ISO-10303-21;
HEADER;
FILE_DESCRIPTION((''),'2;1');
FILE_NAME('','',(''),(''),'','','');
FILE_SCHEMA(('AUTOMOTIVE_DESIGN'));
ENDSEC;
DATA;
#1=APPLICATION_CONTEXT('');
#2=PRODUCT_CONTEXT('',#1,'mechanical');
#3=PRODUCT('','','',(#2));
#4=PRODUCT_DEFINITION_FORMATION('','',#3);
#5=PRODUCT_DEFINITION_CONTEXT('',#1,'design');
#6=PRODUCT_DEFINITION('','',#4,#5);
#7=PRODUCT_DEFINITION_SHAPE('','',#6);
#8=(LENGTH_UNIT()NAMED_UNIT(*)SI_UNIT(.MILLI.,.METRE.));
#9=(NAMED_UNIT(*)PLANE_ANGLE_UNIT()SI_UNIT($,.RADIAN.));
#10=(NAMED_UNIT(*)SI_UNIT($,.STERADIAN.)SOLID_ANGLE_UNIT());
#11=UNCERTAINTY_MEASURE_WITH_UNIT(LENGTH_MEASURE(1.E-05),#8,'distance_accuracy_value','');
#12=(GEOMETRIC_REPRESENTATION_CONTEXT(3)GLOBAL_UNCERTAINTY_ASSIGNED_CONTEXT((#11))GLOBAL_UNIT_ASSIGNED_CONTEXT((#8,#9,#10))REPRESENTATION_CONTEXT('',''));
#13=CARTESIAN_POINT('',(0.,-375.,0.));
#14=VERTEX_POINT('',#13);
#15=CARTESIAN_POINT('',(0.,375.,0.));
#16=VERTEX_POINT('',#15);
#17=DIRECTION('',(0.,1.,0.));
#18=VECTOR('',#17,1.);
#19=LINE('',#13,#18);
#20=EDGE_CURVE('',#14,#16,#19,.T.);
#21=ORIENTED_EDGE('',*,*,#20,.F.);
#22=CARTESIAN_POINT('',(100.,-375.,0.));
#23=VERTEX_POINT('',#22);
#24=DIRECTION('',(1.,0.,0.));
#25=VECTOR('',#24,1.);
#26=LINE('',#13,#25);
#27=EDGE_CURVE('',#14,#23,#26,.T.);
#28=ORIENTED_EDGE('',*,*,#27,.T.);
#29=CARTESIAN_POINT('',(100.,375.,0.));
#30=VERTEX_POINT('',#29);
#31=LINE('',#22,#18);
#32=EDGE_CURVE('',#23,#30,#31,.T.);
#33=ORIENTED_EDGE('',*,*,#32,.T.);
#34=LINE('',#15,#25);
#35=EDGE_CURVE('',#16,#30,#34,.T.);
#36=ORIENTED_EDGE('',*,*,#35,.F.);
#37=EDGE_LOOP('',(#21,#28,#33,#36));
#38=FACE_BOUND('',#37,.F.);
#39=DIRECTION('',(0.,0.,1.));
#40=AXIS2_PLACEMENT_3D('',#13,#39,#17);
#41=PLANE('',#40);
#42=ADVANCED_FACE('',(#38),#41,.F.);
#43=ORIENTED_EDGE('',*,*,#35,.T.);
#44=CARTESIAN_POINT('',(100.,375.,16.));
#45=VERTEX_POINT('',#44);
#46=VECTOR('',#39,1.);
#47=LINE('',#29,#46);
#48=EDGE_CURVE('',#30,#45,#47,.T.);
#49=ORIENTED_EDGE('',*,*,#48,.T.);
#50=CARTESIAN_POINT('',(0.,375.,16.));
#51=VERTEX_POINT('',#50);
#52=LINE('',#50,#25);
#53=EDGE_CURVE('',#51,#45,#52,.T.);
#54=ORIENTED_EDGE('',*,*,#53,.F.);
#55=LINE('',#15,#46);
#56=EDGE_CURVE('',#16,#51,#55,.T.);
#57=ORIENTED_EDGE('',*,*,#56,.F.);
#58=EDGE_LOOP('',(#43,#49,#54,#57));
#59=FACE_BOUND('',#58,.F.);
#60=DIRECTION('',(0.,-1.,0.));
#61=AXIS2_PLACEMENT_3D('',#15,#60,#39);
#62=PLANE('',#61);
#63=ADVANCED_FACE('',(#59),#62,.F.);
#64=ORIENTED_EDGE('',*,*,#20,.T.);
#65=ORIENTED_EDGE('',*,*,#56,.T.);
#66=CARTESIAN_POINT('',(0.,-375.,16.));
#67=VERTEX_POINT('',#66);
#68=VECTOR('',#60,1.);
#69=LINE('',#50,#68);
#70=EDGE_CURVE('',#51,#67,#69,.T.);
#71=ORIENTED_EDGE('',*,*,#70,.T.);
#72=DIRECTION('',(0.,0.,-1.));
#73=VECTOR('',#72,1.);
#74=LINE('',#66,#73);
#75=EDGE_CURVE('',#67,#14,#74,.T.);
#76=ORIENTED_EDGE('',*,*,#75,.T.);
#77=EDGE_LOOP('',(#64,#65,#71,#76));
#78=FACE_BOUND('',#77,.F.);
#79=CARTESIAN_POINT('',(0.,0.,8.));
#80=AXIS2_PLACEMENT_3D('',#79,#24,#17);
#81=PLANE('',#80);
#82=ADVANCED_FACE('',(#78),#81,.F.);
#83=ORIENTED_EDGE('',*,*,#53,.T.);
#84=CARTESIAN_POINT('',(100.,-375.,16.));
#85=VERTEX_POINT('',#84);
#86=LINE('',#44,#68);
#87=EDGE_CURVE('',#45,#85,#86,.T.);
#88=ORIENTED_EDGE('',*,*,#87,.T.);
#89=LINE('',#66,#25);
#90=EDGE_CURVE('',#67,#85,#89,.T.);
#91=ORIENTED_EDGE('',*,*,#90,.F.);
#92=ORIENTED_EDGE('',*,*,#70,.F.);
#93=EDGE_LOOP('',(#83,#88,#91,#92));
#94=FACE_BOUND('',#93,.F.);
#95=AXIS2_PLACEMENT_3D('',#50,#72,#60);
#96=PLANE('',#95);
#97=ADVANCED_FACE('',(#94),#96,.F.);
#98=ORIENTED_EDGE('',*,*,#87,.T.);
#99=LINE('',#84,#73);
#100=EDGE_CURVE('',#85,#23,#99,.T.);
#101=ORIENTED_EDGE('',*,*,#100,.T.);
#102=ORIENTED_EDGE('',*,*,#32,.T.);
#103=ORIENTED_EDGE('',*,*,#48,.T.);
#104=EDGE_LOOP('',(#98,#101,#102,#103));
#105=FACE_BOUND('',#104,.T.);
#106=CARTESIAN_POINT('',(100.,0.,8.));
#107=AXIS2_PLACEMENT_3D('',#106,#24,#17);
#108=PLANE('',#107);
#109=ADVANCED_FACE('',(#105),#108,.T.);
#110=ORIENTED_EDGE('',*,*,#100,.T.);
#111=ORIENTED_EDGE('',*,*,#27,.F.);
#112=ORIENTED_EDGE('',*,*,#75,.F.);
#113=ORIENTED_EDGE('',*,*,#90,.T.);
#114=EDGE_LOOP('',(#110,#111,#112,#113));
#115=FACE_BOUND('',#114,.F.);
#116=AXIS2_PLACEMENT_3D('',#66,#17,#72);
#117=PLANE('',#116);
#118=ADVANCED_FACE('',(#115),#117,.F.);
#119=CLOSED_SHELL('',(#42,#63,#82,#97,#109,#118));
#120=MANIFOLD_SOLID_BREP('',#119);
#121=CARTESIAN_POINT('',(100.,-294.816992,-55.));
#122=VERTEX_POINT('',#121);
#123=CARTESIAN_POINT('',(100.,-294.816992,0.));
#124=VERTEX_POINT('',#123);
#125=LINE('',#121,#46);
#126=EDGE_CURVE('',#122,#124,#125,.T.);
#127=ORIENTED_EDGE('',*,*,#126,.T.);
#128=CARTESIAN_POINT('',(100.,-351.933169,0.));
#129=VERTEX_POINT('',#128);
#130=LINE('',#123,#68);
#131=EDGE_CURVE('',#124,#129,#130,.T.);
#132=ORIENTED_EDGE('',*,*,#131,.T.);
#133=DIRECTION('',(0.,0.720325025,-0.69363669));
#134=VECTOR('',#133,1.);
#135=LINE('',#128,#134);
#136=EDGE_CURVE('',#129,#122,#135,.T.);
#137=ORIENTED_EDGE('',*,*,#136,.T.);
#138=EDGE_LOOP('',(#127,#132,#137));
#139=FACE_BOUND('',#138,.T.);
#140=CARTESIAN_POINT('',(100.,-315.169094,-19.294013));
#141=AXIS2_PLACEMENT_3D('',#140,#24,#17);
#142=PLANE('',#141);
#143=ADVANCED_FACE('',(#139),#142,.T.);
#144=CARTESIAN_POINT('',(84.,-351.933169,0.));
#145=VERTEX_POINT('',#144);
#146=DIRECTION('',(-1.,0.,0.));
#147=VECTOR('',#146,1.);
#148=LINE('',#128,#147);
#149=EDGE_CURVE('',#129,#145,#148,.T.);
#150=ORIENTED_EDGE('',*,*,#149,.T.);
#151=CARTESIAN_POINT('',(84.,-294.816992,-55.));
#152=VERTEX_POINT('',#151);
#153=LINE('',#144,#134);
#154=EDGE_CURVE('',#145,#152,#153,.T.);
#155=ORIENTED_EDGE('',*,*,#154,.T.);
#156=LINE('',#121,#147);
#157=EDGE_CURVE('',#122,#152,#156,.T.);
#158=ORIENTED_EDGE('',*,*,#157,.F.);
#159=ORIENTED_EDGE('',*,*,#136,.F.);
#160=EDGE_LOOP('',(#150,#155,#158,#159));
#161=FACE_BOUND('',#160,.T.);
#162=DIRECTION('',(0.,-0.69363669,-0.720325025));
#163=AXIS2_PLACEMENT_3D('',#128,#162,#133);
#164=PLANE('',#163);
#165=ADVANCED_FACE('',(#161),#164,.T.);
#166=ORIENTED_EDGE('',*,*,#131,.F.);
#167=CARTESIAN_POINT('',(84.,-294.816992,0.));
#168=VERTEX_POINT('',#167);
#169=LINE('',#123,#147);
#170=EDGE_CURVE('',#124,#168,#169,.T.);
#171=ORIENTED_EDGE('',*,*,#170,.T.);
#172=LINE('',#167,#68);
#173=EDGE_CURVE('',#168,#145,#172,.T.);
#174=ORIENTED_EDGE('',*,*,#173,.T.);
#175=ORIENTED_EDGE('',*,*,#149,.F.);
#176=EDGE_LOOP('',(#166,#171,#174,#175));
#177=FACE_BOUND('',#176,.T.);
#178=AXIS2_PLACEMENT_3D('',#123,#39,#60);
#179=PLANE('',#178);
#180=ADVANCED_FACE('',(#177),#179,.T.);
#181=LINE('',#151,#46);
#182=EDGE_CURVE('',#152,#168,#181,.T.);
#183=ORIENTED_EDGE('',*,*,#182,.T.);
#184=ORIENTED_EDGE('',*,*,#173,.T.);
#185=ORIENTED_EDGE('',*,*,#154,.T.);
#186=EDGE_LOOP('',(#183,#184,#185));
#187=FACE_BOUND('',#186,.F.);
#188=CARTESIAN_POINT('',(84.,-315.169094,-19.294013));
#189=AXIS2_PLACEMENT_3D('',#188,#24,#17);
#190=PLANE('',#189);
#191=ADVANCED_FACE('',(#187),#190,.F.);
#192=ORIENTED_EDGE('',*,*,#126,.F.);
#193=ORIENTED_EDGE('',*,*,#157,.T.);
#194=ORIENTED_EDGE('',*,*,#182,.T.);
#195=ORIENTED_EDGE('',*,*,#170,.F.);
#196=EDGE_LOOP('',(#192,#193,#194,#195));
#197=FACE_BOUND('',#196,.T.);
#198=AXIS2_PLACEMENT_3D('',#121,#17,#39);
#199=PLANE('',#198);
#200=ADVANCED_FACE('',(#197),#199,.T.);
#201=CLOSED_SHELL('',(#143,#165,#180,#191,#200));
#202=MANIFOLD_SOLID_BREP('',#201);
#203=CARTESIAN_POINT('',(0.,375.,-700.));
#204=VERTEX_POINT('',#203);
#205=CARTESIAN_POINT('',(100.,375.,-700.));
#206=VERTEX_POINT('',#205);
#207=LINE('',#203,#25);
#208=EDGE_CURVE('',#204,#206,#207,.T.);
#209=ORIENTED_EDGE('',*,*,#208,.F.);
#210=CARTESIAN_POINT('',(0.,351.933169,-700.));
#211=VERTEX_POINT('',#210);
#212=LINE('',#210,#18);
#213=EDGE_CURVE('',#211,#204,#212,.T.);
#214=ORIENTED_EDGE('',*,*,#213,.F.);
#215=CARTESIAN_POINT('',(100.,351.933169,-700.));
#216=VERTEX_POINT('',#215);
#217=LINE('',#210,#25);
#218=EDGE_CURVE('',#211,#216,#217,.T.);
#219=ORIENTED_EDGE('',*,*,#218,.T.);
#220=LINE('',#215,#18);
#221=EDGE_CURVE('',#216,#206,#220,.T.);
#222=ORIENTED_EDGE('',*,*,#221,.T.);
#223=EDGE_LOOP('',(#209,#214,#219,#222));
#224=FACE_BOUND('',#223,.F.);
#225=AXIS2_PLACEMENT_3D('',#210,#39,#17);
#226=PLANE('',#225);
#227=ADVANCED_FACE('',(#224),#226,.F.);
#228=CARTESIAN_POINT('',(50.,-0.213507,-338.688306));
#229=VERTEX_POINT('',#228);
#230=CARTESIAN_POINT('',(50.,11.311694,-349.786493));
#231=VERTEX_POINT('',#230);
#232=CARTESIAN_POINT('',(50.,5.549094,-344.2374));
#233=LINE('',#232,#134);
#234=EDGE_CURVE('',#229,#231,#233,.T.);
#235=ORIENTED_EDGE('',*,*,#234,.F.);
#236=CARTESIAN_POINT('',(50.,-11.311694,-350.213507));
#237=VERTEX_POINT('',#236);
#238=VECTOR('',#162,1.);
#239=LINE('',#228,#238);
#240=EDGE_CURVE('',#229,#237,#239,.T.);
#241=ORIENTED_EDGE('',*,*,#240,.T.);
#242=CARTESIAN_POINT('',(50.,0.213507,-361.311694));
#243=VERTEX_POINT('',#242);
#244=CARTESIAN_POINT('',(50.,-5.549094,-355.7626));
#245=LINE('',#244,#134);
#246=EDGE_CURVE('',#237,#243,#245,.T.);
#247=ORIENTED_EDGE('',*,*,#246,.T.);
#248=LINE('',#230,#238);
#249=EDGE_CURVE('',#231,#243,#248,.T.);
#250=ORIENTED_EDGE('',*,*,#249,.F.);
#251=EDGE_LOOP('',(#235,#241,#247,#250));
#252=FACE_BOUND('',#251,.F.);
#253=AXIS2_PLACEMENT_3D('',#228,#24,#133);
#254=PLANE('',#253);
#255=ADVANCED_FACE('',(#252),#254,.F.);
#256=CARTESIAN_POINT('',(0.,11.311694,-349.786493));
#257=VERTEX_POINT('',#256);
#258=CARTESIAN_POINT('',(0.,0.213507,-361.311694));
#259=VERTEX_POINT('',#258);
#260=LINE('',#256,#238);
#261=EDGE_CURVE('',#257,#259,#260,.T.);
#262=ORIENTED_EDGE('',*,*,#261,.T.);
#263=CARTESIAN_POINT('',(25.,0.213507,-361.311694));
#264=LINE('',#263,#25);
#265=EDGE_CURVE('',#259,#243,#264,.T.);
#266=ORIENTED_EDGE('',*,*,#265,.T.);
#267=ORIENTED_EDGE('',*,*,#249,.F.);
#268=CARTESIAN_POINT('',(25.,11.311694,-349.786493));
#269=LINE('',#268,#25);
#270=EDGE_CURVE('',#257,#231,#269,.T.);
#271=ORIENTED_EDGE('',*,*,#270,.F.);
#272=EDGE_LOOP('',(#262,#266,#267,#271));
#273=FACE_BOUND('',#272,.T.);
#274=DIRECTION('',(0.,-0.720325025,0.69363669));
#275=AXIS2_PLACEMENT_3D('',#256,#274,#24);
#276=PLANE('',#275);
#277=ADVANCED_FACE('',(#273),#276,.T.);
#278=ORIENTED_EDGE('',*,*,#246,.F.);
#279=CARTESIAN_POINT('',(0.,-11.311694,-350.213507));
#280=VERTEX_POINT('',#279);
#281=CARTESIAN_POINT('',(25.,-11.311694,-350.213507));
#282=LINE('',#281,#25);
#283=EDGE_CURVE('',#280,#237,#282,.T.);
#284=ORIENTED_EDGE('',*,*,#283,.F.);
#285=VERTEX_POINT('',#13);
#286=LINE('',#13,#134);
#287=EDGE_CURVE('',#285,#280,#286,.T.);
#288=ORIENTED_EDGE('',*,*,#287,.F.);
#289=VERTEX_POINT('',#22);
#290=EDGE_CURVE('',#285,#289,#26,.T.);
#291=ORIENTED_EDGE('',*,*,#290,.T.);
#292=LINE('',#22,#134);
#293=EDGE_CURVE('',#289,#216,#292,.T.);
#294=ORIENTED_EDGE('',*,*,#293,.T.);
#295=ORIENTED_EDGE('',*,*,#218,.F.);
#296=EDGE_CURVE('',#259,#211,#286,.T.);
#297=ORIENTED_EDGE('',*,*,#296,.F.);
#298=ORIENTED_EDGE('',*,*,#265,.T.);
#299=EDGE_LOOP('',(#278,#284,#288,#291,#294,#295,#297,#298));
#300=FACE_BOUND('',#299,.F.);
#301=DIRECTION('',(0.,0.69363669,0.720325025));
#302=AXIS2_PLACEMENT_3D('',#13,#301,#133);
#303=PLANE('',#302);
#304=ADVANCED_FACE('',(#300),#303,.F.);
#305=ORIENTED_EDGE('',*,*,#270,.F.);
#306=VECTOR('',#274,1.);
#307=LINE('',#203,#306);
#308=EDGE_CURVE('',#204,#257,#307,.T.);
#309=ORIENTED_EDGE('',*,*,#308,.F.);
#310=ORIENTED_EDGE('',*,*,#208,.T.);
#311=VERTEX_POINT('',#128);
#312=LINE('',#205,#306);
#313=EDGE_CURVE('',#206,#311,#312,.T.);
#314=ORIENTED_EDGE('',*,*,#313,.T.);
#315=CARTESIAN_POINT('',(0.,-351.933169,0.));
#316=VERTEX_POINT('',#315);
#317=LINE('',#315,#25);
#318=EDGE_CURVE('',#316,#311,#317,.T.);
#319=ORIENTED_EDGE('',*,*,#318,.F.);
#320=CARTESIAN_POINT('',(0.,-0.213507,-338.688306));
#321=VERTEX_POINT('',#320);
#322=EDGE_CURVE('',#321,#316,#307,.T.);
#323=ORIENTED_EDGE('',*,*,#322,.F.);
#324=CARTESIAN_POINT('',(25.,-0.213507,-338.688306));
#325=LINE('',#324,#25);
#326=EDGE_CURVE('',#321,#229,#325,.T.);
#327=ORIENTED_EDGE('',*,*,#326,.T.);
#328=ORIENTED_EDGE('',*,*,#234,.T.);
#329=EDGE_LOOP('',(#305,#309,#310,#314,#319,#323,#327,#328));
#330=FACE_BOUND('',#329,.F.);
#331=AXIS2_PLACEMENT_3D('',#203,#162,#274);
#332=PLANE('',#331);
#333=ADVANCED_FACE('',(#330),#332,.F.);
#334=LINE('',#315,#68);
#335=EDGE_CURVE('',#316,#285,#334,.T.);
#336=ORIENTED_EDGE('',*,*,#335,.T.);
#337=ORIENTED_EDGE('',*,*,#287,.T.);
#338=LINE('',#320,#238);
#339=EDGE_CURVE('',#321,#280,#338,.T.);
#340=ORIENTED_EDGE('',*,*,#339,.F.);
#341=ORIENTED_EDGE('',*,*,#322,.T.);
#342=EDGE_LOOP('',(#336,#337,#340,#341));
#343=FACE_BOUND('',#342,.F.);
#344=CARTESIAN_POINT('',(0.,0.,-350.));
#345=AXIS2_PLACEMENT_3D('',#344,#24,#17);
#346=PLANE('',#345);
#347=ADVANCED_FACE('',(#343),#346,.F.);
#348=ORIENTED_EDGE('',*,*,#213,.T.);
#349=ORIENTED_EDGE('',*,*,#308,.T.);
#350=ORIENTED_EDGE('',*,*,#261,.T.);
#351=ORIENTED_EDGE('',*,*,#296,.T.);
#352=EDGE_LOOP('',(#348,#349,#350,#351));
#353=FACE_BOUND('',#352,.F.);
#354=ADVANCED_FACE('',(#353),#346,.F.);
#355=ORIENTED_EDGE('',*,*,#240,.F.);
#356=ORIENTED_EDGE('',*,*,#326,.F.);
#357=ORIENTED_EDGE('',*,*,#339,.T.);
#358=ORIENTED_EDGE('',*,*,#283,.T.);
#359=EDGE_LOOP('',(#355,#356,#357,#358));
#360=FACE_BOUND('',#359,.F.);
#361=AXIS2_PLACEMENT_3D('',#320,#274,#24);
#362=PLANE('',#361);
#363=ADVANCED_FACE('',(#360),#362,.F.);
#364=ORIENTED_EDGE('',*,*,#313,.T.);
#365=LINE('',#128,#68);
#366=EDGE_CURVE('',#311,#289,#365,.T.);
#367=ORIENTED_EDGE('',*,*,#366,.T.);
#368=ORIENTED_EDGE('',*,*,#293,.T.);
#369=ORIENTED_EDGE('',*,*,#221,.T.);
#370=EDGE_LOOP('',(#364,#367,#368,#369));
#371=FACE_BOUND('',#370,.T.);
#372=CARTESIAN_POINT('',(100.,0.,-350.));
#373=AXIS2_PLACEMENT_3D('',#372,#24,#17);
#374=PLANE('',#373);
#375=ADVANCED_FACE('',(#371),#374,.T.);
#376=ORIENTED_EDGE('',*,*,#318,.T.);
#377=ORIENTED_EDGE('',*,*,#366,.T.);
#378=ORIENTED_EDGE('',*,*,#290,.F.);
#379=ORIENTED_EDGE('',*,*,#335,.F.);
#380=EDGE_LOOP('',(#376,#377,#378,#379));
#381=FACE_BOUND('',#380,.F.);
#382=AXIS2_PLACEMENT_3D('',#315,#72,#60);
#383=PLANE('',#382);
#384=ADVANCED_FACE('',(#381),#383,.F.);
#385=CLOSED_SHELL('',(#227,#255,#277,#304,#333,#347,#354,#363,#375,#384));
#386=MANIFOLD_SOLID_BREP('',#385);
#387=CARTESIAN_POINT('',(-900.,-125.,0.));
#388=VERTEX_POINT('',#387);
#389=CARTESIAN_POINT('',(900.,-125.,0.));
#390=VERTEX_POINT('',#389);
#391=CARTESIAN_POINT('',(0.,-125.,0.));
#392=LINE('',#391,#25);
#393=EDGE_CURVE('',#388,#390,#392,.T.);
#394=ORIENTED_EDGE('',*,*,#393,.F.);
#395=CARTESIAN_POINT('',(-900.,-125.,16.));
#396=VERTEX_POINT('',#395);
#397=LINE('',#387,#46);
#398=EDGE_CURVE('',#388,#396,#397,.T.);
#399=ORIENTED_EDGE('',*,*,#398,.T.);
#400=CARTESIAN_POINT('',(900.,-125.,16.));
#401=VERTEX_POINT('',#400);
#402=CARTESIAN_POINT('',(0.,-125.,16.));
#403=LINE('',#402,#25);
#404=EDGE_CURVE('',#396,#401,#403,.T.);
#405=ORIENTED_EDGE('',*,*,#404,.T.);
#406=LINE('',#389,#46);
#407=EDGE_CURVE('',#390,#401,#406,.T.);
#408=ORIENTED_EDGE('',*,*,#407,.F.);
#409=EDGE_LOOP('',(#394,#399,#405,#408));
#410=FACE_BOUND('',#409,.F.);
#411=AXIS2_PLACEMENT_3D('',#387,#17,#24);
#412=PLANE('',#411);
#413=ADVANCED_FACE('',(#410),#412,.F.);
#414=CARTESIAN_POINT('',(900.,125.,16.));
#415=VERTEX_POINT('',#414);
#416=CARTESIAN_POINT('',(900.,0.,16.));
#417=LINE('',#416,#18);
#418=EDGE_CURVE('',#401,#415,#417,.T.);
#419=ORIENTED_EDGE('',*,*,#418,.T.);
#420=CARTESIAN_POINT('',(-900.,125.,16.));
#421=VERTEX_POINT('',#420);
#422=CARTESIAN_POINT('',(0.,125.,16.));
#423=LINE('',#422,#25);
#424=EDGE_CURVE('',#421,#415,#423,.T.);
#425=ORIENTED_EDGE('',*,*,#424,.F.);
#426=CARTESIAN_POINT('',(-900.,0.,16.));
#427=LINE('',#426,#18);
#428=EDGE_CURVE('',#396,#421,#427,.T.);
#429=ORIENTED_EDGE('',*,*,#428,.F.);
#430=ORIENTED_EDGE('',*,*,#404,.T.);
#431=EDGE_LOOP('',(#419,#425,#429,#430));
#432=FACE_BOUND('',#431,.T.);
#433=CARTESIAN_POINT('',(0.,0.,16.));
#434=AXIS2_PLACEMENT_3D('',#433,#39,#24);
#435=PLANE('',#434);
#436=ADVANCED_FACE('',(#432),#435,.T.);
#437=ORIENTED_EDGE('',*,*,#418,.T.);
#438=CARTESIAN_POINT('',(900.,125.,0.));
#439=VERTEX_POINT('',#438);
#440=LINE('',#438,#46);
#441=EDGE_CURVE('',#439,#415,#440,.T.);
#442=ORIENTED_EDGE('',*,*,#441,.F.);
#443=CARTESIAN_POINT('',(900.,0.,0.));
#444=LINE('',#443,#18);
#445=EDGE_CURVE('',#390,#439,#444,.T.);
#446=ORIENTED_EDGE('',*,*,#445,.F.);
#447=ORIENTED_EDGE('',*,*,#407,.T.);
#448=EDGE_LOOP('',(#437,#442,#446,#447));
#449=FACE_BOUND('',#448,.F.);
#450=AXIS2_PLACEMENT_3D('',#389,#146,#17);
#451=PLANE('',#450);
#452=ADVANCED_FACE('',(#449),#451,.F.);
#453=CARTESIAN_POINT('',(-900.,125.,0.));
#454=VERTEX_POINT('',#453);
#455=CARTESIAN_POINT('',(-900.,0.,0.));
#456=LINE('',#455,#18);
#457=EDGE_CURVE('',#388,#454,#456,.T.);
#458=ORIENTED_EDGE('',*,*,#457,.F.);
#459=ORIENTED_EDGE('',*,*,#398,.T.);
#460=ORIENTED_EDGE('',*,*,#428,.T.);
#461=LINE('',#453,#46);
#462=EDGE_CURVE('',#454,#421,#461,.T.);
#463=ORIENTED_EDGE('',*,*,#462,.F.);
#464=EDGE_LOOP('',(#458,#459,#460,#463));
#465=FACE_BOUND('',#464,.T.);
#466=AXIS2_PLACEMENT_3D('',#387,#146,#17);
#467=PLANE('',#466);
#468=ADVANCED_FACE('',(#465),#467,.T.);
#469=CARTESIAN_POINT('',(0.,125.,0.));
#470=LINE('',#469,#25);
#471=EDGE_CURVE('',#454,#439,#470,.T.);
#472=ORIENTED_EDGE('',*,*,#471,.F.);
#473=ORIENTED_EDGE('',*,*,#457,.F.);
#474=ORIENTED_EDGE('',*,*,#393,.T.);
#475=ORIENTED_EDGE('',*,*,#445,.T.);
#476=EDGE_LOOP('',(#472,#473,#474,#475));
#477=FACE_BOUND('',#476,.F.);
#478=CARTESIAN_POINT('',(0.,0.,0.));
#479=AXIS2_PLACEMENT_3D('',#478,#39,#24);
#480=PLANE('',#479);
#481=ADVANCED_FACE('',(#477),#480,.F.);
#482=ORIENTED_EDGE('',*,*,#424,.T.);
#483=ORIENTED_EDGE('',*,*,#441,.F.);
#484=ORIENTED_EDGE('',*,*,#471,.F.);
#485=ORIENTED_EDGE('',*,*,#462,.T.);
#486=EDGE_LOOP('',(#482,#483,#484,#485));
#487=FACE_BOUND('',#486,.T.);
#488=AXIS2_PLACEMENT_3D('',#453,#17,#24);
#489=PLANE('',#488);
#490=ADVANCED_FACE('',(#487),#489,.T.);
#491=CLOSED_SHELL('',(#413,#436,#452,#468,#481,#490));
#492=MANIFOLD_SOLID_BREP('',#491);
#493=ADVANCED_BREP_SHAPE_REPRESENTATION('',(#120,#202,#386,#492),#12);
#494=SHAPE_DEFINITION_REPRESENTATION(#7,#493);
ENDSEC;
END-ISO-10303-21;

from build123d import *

# Parameters (mm, degrees)
F0_W     = 1800
F0_H     = 250
F1_DEPTH = 16
F3_DEPTH = 100
F4_W     = 50
F4_H     = 16
F5_DEPTH = 16
F6_DEPTH = 100
F8_DEPTH = 16


# Not quite as in the source:
# - the program builds the solid bodies; features that only make, move or delete a surface that nothing else refers to are left out


with BuildPart() as f1:
    # F0 (on Top) → F1 (new body)
    with BuildSketch(Plane.XY):
        Rectangle(F0_W, F0_H)
    extrude(amount=F1_DEPTH)


with BuildPart() as f3:
    # F2 (on Right) → F3 (new body)
    with BuildSketch(Plane.YZ):
        Polygon((-351.933169445, 0), (-375, 0), (351.933169445, -700), (375, -700), align=None)
    extrude(amount=F3_DEPTH)

    # F4 (on face) → F5 (cut, through all)
    with BuildSketch(Plane(origin=(0, -169.3262597137, -175.8412494914), x_dir=(1, 0, 0), z_dir=(0, 0.6936366902, 0.7203250252))):
        with Locations((25, 242.772841577)):
            Rectangle(F4_W, F4_H)
    extrude(amount=-F5_DEPTH, mode=Mode.SUBTRACT)


with BuildPart() as f6:
    # F2 (on Right) → F6 (new body, through all)
    with BuildSketch(Plane.YZ):
        Polygon((-375, 16), (-375, 0), (-351.933169445, 0), (375, 0), (375, 16), align=None)
    extrude(amount=F6_DEPTH)


with BuildPart() as f8:
    # F7 (on face) → F8 (new body)
    with BuildSketch(Plane.YZ.offset(100)):
        Polygon((-294.8169918458, 0), (-351.933169445, 0), (-294.8169918458, -55), align=None)
    extrude(amount=-F8_DEPTH)


solid = Compound([f1.part, f3.part, f6.part, f8.part])
